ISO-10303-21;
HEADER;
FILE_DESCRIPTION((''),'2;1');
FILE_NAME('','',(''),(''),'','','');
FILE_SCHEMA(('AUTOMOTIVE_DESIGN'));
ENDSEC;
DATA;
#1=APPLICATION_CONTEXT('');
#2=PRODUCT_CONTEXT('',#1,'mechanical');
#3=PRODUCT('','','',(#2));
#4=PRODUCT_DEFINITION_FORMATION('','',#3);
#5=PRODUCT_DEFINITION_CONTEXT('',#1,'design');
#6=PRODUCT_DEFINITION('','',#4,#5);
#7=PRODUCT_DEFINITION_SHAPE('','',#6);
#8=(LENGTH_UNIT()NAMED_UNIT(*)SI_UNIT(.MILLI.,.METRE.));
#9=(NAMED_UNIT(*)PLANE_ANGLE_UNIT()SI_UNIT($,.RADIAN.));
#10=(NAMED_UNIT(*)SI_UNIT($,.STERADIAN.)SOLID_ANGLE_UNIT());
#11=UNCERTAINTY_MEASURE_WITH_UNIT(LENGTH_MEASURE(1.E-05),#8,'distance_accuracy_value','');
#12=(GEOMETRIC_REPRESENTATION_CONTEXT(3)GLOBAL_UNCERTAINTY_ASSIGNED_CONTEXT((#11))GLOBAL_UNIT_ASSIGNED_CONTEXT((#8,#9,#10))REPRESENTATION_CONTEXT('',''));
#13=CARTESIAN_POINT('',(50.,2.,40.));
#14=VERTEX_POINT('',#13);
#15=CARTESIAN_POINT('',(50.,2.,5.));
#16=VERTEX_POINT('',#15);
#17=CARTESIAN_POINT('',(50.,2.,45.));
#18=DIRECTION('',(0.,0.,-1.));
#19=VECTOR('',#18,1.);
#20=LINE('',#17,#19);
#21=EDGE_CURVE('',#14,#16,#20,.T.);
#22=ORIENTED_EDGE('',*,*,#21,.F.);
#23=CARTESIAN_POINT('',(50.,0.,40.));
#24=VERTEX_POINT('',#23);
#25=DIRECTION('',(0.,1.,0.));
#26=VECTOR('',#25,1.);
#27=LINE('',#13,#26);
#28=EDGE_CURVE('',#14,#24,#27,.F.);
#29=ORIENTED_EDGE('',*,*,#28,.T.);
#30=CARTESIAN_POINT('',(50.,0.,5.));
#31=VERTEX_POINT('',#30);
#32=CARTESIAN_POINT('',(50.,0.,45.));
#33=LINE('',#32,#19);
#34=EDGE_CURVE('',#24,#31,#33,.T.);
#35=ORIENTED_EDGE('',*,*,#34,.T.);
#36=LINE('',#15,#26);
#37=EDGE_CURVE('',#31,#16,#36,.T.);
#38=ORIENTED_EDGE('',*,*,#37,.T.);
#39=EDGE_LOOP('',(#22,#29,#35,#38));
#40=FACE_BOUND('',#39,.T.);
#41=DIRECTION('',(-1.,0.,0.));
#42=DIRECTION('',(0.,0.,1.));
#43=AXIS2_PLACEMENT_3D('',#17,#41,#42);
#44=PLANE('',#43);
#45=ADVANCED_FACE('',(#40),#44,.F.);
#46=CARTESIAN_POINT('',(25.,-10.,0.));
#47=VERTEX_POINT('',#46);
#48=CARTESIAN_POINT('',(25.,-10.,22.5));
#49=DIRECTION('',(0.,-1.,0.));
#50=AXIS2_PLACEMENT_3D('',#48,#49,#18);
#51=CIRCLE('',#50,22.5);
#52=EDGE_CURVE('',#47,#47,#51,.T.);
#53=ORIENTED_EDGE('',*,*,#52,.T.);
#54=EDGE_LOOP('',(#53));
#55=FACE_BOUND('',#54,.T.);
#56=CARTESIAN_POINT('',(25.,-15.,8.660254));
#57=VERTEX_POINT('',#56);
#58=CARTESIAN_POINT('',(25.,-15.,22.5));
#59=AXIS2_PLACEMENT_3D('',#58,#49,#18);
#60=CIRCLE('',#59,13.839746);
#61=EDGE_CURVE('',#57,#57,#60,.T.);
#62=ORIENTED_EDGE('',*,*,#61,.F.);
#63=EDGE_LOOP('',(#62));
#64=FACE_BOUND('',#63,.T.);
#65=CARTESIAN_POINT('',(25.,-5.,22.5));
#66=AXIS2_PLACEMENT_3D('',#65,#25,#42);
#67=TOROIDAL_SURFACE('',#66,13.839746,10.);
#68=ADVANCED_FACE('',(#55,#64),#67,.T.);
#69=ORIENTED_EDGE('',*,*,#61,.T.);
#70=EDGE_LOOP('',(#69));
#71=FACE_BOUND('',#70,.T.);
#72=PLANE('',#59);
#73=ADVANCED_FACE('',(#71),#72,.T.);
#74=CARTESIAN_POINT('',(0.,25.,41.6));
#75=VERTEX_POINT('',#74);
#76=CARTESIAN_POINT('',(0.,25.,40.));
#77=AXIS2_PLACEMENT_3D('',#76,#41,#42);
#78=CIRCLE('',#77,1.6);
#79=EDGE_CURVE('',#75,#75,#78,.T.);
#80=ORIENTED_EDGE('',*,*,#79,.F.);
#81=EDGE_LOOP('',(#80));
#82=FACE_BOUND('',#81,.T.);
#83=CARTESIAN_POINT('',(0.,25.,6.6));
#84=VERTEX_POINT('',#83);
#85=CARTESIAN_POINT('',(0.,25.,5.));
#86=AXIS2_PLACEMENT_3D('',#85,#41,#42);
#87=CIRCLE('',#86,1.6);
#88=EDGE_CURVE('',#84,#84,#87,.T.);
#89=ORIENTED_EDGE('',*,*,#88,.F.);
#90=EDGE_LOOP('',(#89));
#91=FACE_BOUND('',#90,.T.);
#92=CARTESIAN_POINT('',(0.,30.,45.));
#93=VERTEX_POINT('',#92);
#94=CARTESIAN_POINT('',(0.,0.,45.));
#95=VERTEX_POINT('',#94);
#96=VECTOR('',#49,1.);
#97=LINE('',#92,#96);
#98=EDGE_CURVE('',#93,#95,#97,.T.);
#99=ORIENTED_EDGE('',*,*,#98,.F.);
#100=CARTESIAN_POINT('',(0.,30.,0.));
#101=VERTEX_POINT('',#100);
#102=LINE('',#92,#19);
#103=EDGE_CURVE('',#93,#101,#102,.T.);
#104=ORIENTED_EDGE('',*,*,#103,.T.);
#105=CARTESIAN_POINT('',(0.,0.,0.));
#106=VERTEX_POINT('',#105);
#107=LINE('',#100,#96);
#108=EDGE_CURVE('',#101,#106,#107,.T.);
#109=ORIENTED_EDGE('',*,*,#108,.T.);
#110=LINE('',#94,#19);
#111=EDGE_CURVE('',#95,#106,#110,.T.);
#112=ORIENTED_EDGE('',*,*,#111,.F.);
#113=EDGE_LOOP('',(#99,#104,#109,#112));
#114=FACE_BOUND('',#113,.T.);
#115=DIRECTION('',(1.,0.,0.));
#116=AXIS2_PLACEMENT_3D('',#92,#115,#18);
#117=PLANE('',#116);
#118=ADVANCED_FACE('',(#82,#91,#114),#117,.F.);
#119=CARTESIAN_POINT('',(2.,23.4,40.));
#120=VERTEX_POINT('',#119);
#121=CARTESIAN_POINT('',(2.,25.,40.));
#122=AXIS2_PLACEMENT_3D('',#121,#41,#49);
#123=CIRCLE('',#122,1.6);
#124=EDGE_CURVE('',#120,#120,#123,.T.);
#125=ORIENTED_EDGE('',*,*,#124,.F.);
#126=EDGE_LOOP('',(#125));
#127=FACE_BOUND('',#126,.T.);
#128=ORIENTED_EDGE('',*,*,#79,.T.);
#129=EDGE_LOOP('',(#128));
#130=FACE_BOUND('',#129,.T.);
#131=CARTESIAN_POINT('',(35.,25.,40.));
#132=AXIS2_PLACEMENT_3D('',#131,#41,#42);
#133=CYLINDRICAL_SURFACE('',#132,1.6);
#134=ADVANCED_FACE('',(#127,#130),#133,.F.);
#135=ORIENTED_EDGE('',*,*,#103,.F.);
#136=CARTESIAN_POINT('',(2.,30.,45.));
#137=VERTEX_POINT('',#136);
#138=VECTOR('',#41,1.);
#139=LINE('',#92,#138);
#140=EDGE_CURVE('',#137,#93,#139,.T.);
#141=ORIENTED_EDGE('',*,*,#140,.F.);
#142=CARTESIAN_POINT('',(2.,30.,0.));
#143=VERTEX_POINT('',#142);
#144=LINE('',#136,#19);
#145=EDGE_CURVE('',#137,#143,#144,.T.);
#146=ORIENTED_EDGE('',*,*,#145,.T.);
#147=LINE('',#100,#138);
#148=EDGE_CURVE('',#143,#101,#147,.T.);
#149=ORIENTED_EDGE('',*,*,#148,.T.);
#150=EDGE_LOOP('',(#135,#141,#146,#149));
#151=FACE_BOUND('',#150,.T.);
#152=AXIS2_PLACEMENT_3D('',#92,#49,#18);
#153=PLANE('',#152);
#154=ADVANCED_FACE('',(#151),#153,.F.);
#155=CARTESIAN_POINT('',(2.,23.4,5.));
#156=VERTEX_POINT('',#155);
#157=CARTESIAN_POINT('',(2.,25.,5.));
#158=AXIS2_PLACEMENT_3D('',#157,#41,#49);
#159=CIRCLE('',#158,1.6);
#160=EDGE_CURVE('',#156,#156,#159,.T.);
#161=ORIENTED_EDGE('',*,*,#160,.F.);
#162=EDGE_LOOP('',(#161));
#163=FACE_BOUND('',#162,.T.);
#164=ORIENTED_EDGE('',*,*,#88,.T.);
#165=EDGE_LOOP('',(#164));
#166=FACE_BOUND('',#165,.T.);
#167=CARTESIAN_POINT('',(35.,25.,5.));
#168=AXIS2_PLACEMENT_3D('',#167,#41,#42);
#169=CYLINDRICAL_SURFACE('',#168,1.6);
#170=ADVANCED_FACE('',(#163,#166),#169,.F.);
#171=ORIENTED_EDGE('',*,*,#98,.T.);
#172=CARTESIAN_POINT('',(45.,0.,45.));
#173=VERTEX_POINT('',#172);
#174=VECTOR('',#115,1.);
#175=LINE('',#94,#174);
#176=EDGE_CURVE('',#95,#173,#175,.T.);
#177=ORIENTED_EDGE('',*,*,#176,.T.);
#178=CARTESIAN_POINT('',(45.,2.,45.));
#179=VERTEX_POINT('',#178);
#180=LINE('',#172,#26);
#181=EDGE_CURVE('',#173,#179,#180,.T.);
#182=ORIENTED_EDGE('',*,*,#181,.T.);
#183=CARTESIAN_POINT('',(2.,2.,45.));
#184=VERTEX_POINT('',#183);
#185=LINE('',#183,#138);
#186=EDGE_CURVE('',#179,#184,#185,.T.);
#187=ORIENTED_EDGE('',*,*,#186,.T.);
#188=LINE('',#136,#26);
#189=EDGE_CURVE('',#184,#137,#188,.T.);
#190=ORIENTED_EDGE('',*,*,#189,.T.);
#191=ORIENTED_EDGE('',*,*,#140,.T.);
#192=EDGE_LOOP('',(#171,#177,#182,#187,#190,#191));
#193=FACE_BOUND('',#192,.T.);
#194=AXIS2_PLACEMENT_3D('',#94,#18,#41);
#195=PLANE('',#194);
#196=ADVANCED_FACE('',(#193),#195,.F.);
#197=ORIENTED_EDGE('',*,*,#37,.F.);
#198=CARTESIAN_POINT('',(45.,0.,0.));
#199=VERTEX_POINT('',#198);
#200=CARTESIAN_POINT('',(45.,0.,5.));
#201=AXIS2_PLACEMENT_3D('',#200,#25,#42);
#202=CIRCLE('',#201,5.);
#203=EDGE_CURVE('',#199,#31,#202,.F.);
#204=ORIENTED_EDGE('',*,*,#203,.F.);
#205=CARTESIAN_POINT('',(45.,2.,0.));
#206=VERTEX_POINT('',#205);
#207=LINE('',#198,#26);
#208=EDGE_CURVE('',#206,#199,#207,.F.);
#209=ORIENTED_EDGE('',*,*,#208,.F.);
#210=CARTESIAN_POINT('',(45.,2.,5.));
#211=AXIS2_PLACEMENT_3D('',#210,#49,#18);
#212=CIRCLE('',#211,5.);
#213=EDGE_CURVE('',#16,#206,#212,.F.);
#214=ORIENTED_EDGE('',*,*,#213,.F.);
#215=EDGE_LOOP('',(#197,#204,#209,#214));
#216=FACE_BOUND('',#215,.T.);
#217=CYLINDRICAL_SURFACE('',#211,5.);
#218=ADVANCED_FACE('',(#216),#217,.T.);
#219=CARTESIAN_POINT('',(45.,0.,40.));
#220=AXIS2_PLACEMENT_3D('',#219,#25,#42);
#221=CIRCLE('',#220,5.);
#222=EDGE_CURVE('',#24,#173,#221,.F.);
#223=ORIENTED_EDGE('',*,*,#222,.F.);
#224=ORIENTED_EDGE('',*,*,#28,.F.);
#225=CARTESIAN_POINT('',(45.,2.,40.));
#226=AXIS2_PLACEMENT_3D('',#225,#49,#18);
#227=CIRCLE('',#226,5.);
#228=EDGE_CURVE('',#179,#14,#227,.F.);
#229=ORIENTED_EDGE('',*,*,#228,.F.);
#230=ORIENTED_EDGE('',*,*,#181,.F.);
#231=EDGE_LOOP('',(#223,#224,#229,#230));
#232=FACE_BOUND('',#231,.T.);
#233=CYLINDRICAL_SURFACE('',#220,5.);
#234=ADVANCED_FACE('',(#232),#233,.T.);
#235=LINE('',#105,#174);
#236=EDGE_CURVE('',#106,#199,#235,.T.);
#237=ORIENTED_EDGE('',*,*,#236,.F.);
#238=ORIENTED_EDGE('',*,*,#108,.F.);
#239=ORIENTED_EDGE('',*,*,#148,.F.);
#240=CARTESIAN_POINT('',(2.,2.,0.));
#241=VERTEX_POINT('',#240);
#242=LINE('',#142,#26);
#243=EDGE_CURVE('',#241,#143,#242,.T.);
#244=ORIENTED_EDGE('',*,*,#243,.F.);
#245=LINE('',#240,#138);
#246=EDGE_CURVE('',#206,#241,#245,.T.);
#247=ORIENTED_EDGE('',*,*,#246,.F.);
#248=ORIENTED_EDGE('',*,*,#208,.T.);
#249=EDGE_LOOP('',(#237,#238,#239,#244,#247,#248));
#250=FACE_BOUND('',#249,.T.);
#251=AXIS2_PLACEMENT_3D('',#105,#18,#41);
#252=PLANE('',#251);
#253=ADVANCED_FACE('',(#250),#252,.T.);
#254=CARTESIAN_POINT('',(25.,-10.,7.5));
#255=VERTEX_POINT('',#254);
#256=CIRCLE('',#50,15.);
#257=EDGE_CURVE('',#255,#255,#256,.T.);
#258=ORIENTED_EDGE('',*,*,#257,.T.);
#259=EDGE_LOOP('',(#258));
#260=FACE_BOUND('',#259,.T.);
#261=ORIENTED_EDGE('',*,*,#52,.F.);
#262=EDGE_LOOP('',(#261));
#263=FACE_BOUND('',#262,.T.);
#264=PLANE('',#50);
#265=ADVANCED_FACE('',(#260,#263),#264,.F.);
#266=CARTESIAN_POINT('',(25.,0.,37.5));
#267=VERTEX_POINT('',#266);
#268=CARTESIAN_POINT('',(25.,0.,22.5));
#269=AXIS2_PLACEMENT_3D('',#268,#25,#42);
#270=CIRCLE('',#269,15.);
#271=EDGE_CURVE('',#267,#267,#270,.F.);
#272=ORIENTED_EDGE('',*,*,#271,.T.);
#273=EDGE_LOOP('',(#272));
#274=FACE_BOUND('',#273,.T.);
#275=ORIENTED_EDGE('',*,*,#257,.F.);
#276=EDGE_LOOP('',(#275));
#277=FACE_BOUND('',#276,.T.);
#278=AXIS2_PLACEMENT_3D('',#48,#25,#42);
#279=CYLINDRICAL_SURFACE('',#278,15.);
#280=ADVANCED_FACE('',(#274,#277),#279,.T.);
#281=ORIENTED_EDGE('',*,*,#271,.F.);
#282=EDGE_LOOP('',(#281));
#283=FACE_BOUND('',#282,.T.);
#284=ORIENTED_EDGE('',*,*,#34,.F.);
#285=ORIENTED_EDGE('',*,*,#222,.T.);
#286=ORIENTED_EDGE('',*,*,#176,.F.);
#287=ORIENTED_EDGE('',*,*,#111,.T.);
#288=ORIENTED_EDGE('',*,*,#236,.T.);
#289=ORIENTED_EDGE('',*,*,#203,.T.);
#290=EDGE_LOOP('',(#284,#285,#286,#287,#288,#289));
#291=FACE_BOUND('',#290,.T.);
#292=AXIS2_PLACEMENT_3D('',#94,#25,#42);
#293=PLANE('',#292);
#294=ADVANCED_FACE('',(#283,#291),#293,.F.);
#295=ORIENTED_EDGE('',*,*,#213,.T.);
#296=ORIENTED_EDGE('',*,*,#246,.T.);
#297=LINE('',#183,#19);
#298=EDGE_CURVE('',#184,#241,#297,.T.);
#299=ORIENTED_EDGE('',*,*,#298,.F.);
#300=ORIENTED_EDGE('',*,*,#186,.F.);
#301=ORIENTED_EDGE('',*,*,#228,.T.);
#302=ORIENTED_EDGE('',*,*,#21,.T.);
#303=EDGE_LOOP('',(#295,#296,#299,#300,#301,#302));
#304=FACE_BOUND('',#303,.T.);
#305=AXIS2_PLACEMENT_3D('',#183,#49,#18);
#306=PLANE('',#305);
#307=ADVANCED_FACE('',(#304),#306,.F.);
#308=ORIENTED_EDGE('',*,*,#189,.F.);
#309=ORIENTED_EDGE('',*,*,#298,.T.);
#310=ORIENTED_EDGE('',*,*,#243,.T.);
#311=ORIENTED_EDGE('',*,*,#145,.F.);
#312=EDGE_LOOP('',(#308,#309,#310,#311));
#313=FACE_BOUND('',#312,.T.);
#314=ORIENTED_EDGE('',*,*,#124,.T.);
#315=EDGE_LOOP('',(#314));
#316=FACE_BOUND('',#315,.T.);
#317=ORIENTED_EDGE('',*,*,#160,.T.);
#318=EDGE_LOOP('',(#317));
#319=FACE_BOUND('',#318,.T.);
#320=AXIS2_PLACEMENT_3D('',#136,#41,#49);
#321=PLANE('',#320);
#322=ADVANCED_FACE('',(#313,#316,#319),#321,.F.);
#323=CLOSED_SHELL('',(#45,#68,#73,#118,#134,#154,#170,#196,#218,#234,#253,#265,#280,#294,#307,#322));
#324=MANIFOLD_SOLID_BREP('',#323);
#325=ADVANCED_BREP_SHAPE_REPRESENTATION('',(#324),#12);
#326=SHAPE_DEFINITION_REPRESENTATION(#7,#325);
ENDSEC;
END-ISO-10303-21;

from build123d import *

# Parameters (mm, degrees)
EXTRUDE_1_DEPTH     = 45
SKETCH_2_R          = 1.6
CUT_EXTRUDE_1_DEPTH = 35
FILLET_1_R          = 5
SKETCH_3_R          = 15
EXTRUDE_2_DEPTH     = 10
SKETCH_7_R          = 22.5
EXTRUDE_3_DEPTH     = 5
FILLET_2_R          = 10


with BuildPart() as part:
    # ｽｹｯﾁ1 → ﾎﾞｽ - 押し出し1 (new body)
    with BuildSketch(Plane.XY):
        Polygon((0, 30), (0, 0), (50, 0), (50, 2), (2, 2), (2, 30), align=None)
    extrude(amount=EXTRUDE_1_DEPTH)

    # ｽｹｯﾁ2 → ｶｯﾄ - 押し出し1 (cut)
    with BuildSketch(Plane.ZY):
        with Locations((40, 25)):
            Circle(SKETCH_2_R)
        with Locations((5, 25)):
            Circle(SKETCH_2_R)
    extrude(amount=-CUT_EXTRUDE_1_DEPTH, mode=Mode.SUBTRACT)

    # ﾌｨﾚｯﾄ1
    fillet_1_edges = [part.edges().sort_by_distance(p)[0] for p in [
        (50, 1, 45),
        (50, 1, 0),
    ]]
    fillet(fillet_1_edges, radius=FILLET_1_R)

    # ｽｹｯﾁ3 → ﾎﾞｽ - 押し出し2 (add)
    with BuildSketch(Plane.XZ):
        with Locations(Location((25, 22.5, 0), (0, 0, 90))):
            Circle(SKETCH_3_R)
    extrude(amount=EXTRUDE_2_DEPTH)

    # ｽｹｯﾁ7 → ﾎﾞｽ - 押し出し3 (add)
    with BuildSketch(Plane(origin=(0, -10, 0), x_dir=(-1, 0, 0), z_dir=(0, -1, 0))):
        with Locations(Location((-25, -22.5, 0), (0, 0, 90))):
            Circle(SKETCH_7_R)
    extrude(amount=EXTRUDE_3_DEPTH)

    # ﾌｨﾚｯﾄ2
    # the kernel refuses this fillet: 10 mm, written as the material it takes off along each edge
    with BuildSketch(Plane(origin=(25, -15, 22.5), x_dir=(0, 0, -1), z_dir=(-1, 0, 0))) as fillet_2_piece_1:
        with BuildLine():
            CenterArc((13.839745962, -10), FILLET_2_R, 30, 60)
            Line((13.839745962, 0), (13.839745962, 0.2))
            Line((13.839745962, 0.2), (22.5, 0.2))
            Line((22.5, 0.2), (22.7, 0))
            ThreePointArc((22.7, 0), (22.7, -2.5), (22.673205081, -4.9))
            Line((22.673205081, -4.9), (22.5, -5))
        make_face()
    revolve(axis=Axis((25, -15, 22.5), (0, -1, 0)), mode=Mode.SUBTRACT)


solid = part.part
